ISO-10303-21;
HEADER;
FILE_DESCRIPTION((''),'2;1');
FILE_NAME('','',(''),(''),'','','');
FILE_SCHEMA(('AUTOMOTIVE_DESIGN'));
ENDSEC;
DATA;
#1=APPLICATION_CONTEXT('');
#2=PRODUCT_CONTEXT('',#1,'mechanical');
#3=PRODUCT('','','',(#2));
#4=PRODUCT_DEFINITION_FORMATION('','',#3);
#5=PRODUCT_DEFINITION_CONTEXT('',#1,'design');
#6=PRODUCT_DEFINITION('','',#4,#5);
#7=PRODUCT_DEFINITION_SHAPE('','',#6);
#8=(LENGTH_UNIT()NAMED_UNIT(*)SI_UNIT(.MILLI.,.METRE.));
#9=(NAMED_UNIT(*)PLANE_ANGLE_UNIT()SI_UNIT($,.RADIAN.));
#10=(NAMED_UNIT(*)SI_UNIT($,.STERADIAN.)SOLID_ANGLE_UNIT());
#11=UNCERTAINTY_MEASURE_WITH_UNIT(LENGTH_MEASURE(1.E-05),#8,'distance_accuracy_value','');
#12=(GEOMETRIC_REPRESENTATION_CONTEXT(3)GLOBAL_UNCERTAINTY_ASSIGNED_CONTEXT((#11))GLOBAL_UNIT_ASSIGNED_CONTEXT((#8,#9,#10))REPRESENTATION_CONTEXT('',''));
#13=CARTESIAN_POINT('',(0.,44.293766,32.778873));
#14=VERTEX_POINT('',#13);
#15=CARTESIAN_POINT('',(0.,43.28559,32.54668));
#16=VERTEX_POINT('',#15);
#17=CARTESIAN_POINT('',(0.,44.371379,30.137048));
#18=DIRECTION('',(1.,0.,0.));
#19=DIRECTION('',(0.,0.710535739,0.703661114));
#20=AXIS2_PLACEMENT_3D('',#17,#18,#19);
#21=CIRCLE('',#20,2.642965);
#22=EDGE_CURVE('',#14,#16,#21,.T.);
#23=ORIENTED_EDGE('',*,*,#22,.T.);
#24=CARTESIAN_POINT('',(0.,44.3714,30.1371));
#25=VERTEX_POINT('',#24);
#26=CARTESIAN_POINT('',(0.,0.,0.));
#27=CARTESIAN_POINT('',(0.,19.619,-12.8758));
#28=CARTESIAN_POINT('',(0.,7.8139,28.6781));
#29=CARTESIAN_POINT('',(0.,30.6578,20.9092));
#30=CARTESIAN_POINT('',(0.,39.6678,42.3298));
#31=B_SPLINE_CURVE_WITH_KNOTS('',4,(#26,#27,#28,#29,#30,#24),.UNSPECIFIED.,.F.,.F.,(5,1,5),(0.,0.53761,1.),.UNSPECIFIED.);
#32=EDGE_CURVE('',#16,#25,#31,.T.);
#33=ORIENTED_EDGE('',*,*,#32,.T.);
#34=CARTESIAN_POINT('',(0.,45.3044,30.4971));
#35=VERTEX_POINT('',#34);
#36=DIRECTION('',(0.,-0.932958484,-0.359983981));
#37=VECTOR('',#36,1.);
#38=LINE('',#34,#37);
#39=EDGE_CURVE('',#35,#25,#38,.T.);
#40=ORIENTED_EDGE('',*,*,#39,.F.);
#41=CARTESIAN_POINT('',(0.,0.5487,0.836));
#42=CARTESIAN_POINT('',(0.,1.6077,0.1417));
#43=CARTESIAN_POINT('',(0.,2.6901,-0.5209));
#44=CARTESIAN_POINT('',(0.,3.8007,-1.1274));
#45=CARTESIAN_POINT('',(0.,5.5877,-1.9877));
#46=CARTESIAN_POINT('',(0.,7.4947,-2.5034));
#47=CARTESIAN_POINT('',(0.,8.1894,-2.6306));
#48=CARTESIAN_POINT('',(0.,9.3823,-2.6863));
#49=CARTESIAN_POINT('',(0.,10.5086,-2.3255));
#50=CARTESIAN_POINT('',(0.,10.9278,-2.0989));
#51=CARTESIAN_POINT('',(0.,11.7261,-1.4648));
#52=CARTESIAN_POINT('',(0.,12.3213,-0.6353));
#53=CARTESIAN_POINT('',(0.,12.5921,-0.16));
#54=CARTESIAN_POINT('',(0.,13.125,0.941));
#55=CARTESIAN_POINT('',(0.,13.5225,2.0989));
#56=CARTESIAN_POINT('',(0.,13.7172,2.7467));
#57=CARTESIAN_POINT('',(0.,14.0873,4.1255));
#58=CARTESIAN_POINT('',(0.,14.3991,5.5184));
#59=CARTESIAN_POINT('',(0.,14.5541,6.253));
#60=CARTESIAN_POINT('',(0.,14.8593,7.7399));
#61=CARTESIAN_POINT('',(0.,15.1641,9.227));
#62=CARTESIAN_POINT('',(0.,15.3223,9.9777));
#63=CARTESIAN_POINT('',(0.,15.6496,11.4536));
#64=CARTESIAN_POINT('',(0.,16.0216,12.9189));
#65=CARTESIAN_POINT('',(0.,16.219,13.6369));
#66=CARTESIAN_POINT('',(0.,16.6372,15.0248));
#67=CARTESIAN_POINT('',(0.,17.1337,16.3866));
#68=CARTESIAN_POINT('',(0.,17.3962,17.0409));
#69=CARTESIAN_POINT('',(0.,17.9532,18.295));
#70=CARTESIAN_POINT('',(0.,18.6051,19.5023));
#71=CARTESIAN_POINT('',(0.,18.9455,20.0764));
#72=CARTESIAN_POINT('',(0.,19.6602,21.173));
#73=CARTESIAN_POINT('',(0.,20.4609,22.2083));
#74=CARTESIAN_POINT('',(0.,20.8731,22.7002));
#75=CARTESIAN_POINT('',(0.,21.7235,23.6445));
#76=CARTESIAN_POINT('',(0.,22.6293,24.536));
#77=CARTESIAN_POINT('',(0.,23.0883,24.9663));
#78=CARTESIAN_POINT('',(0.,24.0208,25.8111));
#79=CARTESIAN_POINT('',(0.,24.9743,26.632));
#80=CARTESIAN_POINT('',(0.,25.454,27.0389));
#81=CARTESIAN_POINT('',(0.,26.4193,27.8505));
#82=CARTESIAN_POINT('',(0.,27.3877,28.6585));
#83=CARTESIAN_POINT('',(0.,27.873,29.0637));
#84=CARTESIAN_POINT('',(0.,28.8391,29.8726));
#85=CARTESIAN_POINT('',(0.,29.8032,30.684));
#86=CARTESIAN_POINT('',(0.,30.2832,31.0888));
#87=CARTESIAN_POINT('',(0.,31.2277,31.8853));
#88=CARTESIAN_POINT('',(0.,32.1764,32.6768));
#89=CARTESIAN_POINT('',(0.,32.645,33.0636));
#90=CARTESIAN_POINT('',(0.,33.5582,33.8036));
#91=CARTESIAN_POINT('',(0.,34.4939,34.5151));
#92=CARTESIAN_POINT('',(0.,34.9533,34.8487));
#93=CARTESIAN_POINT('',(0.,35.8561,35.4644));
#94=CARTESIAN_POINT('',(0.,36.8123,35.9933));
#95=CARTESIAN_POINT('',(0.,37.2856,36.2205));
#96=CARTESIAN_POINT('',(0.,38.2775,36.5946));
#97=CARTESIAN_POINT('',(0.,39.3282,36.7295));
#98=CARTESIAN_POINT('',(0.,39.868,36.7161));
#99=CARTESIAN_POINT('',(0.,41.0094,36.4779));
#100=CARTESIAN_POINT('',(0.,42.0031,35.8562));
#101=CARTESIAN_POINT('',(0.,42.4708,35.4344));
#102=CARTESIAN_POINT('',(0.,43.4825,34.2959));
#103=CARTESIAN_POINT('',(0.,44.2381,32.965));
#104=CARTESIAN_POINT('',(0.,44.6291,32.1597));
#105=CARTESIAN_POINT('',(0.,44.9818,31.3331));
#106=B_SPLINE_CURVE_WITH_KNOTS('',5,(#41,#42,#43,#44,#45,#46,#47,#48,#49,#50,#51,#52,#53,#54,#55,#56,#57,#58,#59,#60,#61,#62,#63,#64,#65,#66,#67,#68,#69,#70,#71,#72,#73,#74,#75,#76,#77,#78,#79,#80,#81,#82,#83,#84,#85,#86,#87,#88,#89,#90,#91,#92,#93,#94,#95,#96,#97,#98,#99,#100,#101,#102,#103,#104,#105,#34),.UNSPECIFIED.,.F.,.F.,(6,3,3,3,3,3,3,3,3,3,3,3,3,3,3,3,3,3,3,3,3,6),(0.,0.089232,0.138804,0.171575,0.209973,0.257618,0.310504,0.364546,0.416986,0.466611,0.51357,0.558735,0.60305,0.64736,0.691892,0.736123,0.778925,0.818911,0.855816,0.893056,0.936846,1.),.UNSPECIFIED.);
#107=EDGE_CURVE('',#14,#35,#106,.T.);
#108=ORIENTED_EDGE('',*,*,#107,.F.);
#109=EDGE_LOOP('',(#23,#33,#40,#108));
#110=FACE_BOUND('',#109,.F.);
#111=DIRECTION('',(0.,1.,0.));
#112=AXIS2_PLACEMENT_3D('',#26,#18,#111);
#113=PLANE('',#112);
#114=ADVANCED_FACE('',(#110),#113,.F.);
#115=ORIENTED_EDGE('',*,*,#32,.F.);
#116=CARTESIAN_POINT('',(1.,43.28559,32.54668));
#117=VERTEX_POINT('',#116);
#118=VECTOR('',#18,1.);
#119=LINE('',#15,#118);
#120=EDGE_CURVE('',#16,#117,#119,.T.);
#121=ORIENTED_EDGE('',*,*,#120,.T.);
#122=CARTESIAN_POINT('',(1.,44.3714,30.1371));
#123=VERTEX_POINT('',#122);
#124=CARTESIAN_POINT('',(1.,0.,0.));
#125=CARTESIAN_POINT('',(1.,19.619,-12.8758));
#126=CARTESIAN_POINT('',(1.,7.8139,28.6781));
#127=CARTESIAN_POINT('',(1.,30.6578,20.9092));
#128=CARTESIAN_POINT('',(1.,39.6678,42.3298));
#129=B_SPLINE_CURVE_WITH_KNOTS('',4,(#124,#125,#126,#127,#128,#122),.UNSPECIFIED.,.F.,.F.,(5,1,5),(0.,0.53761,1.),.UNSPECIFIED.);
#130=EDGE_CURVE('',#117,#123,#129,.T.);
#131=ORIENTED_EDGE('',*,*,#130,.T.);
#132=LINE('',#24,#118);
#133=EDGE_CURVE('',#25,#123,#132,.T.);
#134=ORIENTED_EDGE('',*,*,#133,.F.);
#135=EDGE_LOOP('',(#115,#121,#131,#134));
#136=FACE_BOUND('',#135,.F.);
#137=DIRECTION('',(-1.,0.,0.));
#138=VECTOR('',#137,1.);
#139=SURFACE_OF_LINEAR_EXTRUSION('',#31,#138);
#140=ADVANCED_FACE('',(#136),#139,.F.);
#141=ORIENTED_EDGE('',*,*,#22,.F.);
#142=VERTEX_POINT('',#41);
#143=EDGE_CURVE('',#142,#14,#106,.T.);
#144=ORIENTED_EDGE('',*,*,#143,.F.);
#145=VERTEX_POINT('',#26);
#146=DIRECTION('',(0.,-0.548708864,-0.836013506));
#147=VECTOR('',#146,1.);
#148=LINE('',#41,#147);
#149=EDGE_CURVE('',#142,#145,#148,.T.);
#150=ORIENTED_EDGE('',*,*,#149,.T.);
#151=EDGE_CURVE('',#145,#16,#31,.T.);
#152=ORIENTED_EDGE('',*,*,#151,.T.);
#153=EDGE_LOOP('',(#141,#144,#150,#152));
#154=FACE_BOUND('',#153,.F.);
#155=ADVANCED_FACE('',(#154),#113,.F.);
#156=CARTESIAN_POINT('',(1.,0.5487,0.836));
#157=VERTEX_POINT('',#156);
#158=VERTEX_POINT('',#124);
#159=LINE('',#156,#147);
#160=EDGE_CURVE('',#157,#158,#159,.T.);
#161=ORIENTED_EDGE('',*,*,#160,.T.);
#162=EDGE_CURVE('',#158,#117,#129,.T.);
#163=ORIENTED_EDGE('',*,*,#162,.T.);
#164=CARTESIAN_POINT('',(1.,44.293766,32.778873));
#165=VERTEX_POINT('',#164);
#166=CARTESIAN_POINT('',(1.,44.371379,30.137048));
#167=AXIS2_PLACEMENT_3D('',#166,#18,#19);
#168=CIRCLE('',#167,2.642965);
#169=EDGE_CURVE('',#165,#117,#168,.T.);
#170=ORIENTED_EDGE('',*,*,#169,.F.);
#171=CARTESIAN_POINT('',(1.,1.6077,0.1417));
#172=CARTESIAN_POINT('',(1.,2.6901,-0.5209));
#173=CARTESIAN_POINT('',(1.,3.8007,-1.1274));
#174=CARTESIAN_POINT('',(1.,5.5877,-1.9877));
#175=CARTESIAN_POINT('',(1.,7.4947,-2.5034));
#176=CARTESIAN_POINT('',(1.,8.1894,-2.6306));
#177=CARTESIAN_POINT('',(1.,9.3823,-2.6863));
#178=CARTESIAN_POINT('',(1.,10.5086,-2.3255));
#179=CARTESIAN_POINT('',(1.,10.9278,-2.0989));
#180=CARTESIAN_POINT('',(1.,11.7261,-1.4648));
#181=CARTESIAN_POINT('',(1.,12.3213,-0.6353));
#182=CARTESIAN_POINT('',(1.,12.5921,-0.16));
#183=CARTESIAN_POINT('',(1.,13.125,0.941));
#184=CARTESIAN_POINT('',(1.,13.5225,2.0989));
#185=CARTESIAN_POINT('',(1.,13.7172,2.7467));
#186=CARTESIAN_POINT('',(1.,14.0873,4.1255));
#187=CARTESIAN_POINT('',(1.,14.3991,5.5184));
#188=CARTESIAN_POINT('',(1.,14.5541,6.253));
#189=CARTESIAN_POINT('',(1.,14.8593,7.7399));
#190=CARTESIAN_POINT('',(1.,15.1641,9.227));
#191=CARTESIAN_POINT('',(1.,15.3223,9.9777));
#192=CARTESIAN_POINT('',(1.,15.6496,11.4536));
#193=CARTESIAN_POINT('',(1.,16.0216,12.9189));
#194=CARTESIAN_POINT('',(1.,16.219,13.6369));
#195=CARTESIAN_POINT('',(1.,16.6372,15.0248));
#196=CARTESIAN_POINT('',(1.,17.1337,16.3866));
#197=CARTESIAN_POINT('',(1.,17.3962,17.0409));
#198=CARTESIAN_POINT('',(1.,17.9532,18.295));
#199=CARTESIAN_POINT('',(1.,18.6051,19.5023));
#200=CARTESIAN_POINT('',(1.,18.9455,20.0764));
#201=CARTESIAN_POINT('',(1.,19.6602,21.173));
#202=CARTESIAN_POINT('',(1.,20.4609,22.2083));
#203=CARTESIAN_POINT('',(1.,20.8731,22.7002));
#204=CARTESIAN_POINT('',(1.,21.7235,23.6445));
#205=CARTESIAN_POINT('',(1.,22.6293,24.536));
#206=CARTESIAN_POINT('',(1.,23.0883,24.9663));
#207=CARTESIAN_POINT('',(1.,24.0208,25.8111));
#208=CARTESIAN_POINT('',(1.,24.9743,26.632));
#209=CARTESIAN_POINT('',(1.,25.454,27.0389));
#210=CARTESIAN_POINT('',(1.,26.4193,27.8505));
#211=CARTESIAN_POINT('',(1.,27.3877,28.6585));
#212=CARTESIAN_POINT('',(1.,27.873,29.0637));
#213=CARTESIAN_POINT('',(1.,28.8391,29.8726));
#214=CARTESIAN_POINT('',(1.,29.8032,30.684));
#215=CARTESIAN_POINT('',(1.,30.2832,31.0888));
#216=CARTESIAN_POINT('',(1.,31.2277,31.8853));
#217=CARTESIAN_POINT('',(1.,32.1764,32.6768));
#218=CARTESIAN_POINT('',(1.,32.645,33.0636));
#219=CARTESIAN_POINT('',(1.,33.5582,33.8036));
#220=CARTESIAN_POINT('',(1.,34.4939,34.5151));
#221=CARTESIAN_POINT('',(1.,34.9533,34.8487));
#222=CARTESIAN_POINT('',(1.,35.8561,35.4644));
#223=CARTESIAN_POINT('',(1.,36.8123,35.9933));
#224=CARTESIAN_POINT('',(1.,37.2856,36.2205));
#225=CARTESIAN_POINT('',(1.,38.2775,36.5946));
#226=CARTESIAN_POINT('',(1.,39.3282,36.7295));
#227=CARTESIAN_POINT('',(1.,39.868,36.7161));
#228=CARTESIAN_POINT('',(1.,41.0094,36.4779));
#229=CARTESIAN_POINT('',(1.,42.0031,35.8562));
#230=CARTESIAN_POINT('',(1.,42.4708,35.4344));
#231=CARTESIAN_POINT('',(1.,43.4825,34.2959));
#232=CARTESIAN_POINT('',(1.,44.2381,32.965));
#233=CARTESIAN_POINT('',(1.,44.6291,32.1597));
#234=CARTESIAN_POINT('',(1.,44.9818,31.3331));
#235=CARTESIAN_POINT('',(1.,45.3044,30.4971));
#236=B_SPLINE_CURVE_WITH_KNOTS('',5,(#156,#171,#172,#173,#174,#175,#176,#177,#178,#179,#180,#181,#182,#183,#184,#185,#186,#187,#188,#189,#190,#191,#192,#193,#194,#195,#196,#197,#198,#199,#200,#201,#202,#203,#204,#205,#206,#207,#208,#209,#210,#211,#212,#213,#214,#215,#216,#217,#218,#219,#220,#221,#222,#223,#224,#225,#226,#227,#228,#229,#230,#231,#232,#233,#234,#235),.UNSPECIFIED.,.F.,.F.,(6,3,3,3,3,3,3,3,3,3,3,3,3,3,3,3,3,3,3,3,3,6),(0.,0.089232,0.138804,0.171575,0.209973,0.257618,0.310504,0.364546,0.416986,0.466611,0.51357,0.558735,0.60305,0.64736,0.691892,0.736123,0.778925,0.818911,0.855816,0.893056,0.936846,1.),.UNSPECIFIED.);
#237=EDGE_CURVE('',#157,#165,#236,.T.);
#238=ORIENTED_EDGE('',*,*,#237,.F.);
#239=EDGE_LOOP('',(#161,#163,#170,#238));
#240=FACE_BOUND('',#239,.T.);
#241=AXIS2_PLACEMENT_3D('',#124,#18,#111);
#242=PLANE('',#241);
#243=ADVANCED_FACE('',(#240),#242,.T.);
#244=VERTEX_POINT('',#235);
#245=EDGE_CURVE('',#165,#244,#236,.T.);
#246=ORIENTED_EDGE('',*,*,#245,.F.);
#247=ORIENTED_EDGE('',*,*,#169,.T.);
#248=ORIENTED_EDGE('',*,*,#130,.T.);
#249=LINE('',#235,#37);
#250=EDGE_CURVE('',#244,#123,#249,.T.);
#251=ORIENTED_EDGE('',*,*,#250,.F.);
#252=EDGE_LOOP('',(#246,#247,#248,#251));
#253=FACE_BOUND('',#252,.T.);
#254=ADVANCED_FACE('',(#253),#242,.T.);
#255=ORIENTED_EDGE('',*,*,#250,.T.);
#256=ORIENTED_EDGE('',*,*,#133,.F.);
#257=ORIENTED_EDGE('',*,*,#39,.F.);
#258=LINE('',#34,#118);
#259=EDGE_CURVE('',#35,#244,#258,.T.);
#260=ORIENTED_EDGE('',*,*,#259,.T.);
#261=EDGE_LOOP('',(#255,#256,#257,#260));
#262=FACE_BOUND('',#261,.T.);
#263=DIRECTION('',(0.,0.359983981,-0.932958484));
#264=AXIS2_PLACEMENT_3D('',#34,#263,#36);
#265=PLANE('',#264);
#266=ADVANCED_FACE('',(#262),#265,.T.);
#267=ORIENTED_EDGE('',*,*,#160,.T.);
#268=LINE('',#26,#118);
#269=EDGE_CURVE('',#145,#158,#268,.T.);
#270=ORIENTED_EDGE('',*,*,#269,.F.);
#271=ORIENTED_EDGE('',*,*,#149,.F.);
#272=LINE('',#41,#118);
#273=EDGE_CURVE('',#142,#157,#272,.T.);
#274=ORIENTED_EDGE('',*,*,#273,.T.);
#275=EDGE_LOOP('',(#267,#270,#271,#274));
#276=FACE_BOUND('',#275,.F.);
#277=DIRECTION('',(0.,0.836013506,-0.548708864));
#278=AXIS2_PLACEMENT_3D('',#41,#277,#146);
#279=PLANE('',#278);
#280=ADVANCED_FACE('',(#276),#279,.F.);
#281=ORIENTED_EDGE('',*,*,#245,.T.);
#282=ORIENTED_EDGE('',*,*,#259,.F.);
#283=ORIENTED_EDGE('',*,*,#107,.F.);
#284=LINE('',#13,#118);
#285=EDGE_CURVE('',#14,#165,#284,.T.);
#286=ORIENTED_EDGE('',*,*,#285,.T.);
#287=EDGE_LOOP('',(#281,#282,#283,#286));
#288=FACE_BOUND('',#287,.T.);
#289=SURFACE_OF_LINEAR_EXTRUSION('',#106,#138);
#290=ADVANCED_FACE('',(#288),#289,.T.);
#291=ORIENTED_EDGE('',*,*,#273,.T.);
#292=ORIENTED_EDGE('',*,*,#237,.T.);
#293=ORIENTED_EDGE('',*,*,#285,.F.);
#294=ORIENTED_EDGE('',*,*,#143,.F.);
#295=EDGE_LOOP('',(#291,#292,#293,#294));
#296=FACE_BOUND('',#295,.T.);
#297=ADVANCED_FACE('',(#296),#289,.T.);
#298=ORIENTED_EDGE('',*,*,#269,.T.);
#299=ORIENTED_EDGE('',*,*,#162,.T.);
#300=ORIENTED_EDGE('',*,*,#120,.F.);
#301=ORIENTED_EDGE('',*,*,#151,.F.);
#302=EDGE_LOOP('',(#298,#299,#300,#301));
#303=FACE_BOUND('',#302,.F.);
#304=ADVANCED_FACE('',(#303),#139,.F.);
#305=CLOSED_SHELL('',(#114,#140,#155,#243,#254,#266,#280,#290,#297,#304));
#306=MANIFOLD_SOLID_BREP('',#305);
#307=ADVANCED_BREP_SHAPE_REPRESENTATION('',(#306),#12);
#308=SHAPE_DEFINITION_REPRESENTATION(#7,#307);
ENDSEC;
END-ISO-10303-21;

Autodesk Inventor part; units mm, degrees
ref_plane "YZ Plane" through (0, 0, 0) normal (1, 0, 0) x (0, 1, 0)
ref_plane "XZ Plane" through (0, 0, 0) normal (0, 1, 0) x (-1, 0, 0)
ref_plane "XY Plane" through (0, 0, 0) normal (0, 0, 1) x (1, 0, 0)
sketch "Sketch1" plane through (0, 0, 0) normal (1, 0, 0) x (0, 1, 0)
  arc A0 (46.2493, 31.9968) -> (42.4397, 31.9409) centre (44.3714, 30.1371) ccw projected
  spline S0 degree 4 poles (0, 0) (19.619, -12.8758) (7.8139, 28.6781) (30.6578, 20.9092) (39.6678, 42.3298) (44.3714, 30.1371) knots 0 0 0 0 0 0.53761 1 1 1 1 1
  line L0 (45.3044, 30.4971) -> (44.3714, 30.1371)
  line L1 (0.5487, 0.836) -> (0, 0)
  spline S1 degree 5 poles (0.5487, 0.836) (1.6077, 0.1417) (2.6901, -0.5209) (3.8007, -1.1274) (5.5877, -1.9877) (7.4947, -2.5034) (8.1894, -2.6306) (9.3823, -2.6863) (10.5086, -2.3255) (10.9278, -2.0989) (11.7261, -1.4648) (12.3213, -0.6353) (12.5921, -0.16) (13.125, 0.941) (13.5225, 2.0989) (13.7172, 2.7467) (14.0873, 4.1255) (14.3991, 5.5184) (14.5541, 6.253) (14.8593, 7.7399) (15.1641, 9.227) (15.3223, 9.9777) (15.6496, 11.4536) (16.0216, 12.9189) (16.219, 13.6369) (16.6372, 15.0248) (17.1337, 16.3866) (17.3962, 17.0409) (17.9532, 18.295) (18.6051, 19.5023) (18.9455, 20.0764) (19.6602, 21.173) (20.4609, 22.2083) (20.8731, 22.7002) (21.7235, 23.6445) (22.6293, 24.536) (23.0883, 24.9663) (24.0208, 25.8111) (24.9743, 26.632) (25.454, 27.0389) (26.4193, 27.8505) (27.3877, 28.6585) (27.873, 29.0637) (28.8391, 29.8726) (29.8032, 30.684) (30.2832, 31.0888) (31.2277, 31.8853) (32.1764, 32.6768) (32.645, 33.0636) (33.5582, 33.8036) (34.4939, 34.5151) (34.9533, 34.8487) (35.8561, 35.4644) (36.8123, 35.9933) (37.2856, 36.2205) (38.2775, 36.5946) (39.3282, 36.7295) (39.868, 36.7161) (41.0094, 36.4779) (42.0031, 35.8562) (42.4708, 35.4344) (43.4825, 34.2959) (44.2381, 32.965) (44.6291, 32.1597) (44.9818, 31.3331) (45.3044, 30.4971) knots 0 0 0 0 0 0 0.089232 0.089232 0.089232 0.138804 0.138804 0.138804 0.171575 0.171575 0.171575 0.209973 0.209973 0.209973 0.257618 0.257618 0.257618 0.310504 0.310504 0.310504 0.364546 0.364546 0.364546 0.416986 0.416986 0.416986 0.466611 0.466611 0.466611 0.51357 0.51357 0.51357 0.558735 0.558735 0.558735 0.60305 0.60305 0.60305 0.64736 0.64736 0.64736 0.691892 0.691892 0.691892 0.736123 0.736123 0.736123 0.778925 0.778925 0.778925 0.818911 0.818911 0.818911 0.855816 0.855816 0.855816 0.893056 0.893056 0.893056 0.936846 0.936846 0.936846 1 1 1 1 1 1
  point P0 (14.5277, 2.0144)
  point P1 (19.5329, 19.0775)
  point P2 (28.6342, 28.3973)
  point P3 (37.7073, 35.284)
  dimension "d2" = 1
extrude "Extrusion1" add sketch "Sketch1" along normal blind 1
properties part number "Fiber"
